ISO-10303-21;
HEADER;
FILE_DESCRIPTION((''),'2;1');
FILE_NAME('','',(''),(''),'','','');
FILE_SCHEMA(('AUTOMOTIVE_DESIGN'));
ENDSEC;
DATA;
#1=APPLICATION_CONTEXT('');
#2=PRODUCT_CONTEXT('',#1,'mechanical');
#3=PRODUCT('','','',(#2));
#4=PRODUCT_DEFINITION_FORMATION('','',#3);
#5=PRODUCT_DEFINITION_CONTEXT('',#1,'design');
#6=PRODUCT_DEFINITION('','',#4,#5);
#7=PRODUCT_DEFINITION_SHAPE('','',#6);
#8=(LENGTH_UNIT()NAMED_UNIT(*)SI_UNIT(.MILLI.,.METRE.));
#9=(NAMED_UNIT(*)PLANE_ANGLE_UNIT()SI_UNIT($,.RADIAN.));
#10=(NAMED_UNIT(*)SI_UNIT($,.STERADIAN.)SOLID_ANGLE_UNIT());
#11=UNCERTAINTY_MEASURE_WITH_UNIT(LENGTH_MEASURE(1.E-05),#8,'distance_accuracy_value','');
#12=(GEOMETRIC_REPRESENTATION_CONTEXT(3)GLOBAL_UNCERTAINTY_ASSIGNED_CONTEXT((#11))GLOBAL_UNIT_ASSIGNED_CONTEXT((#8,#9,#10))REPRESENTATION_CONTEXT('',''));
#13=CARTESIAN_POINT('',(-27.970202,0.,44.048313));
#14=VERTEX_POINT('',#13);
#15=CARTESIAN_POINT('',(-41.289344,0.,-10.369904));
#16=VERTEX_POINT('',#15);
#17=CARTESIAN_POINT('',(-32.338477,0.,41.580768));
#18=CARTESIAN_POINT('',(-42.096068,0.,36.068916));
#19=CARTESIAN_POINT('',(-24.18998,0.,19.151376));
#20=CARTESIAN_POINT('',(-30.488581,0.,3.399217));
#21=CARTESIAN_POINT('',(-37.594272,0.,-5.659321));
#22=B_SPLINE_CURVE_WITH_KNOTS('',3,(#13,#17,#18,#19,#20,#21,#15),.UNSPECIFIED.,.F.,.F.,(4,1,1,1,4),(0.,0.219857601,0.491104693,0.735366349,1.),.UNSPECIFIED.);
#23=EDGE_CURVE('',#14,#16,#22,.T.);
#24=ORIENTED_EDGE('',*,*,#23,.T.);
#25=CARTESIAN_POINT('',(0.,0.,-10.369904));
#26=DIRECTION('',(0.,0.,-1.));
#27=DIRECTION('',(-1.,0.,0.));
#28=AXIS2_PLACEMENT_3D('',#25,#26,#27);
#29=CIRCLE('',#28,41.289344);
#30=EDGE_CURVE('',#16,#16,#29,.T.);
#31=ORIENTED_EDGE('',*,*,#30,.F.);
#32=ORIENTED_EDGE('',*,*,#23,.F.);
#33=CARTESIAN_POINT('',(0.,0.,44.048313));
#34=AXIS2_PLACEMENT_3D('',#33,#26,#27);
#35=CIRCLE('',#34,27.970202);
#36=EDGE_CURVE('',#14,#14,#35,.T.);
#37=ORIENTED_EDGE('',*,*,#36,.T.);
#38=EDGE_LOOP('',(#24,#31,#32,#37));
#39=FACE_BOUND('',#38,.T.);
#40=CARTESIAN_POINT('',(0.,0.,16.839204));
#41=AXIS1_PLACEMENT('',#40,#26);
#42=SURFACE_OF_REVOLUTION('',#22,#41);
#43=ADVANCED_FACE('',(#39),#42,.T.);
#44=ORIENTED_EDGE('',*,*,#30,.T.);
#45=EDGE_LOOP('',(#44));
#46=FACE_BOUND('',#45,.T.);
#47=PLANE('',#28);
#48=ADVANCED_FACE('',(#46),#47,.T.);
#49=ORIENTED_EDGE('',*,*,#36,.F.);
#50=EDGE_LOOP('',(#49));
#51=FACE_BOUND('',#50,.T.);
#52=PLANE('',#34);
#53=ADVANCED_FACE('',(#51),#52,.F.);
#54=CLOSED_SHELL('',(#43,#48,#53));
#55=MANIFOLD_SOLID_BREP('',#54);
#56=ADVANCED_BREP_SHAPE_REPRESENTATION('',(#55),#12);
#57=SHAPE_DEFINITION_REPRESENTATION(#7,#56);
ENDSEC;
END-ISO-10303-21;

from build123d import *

# Parameters (mm, degrees)
F2_R     = 29.1443160408
F3_DEPTH = 14.732


# Not quite as in the source:
# - a feature names something its author has since deleted; it is built from what else it names


with BuildPart() as f1:
    # F0 (on Front) → F1 (revolve)
    with BuildSketch(Plane.XZ):
        with BuildLine():
            Line((0, 44.0483130515), (-27.9702022672, 44.0483130515))
            add(Edge.make_bspline(
                [(-27.9702022672, 44.0483130515), (-32.3384774692, 41.5807684215), (-42.0960680493, 36.0689155451), (-24.18998033, 19.151376482), (-30.4885813686, 3.3992167823), (-37.5942722132, -5.6593207799), (-41.28934443, -10.3699043393)],
                knots=[0, 0, 0, 0, 0.2198576006, 0.4911046932, 0.7353663492, 1, 1, 1, 1], degree=3))
            Line((-41.28934443, -10.3699043393), (0, -10.3699043393))
            Line((0, -10.3699043393), (0, 44.0483130515))
        make_face()
    revolve(axis=Axis((0, 0, 16.8392043561), (0, 0, -1)))

    # F2 (on face) → F3 (join)
    with BuildSketch(Plane(origin=(0, 0, -10.3699043393), x_dir=(1, 0, 0), z_dir=(0, 0, -1))):
        with Locations((1.5221881913, 0)):
            Circle(F2_R)
    extrude(amount=-F3_DEPTH)


solid = f1.part
